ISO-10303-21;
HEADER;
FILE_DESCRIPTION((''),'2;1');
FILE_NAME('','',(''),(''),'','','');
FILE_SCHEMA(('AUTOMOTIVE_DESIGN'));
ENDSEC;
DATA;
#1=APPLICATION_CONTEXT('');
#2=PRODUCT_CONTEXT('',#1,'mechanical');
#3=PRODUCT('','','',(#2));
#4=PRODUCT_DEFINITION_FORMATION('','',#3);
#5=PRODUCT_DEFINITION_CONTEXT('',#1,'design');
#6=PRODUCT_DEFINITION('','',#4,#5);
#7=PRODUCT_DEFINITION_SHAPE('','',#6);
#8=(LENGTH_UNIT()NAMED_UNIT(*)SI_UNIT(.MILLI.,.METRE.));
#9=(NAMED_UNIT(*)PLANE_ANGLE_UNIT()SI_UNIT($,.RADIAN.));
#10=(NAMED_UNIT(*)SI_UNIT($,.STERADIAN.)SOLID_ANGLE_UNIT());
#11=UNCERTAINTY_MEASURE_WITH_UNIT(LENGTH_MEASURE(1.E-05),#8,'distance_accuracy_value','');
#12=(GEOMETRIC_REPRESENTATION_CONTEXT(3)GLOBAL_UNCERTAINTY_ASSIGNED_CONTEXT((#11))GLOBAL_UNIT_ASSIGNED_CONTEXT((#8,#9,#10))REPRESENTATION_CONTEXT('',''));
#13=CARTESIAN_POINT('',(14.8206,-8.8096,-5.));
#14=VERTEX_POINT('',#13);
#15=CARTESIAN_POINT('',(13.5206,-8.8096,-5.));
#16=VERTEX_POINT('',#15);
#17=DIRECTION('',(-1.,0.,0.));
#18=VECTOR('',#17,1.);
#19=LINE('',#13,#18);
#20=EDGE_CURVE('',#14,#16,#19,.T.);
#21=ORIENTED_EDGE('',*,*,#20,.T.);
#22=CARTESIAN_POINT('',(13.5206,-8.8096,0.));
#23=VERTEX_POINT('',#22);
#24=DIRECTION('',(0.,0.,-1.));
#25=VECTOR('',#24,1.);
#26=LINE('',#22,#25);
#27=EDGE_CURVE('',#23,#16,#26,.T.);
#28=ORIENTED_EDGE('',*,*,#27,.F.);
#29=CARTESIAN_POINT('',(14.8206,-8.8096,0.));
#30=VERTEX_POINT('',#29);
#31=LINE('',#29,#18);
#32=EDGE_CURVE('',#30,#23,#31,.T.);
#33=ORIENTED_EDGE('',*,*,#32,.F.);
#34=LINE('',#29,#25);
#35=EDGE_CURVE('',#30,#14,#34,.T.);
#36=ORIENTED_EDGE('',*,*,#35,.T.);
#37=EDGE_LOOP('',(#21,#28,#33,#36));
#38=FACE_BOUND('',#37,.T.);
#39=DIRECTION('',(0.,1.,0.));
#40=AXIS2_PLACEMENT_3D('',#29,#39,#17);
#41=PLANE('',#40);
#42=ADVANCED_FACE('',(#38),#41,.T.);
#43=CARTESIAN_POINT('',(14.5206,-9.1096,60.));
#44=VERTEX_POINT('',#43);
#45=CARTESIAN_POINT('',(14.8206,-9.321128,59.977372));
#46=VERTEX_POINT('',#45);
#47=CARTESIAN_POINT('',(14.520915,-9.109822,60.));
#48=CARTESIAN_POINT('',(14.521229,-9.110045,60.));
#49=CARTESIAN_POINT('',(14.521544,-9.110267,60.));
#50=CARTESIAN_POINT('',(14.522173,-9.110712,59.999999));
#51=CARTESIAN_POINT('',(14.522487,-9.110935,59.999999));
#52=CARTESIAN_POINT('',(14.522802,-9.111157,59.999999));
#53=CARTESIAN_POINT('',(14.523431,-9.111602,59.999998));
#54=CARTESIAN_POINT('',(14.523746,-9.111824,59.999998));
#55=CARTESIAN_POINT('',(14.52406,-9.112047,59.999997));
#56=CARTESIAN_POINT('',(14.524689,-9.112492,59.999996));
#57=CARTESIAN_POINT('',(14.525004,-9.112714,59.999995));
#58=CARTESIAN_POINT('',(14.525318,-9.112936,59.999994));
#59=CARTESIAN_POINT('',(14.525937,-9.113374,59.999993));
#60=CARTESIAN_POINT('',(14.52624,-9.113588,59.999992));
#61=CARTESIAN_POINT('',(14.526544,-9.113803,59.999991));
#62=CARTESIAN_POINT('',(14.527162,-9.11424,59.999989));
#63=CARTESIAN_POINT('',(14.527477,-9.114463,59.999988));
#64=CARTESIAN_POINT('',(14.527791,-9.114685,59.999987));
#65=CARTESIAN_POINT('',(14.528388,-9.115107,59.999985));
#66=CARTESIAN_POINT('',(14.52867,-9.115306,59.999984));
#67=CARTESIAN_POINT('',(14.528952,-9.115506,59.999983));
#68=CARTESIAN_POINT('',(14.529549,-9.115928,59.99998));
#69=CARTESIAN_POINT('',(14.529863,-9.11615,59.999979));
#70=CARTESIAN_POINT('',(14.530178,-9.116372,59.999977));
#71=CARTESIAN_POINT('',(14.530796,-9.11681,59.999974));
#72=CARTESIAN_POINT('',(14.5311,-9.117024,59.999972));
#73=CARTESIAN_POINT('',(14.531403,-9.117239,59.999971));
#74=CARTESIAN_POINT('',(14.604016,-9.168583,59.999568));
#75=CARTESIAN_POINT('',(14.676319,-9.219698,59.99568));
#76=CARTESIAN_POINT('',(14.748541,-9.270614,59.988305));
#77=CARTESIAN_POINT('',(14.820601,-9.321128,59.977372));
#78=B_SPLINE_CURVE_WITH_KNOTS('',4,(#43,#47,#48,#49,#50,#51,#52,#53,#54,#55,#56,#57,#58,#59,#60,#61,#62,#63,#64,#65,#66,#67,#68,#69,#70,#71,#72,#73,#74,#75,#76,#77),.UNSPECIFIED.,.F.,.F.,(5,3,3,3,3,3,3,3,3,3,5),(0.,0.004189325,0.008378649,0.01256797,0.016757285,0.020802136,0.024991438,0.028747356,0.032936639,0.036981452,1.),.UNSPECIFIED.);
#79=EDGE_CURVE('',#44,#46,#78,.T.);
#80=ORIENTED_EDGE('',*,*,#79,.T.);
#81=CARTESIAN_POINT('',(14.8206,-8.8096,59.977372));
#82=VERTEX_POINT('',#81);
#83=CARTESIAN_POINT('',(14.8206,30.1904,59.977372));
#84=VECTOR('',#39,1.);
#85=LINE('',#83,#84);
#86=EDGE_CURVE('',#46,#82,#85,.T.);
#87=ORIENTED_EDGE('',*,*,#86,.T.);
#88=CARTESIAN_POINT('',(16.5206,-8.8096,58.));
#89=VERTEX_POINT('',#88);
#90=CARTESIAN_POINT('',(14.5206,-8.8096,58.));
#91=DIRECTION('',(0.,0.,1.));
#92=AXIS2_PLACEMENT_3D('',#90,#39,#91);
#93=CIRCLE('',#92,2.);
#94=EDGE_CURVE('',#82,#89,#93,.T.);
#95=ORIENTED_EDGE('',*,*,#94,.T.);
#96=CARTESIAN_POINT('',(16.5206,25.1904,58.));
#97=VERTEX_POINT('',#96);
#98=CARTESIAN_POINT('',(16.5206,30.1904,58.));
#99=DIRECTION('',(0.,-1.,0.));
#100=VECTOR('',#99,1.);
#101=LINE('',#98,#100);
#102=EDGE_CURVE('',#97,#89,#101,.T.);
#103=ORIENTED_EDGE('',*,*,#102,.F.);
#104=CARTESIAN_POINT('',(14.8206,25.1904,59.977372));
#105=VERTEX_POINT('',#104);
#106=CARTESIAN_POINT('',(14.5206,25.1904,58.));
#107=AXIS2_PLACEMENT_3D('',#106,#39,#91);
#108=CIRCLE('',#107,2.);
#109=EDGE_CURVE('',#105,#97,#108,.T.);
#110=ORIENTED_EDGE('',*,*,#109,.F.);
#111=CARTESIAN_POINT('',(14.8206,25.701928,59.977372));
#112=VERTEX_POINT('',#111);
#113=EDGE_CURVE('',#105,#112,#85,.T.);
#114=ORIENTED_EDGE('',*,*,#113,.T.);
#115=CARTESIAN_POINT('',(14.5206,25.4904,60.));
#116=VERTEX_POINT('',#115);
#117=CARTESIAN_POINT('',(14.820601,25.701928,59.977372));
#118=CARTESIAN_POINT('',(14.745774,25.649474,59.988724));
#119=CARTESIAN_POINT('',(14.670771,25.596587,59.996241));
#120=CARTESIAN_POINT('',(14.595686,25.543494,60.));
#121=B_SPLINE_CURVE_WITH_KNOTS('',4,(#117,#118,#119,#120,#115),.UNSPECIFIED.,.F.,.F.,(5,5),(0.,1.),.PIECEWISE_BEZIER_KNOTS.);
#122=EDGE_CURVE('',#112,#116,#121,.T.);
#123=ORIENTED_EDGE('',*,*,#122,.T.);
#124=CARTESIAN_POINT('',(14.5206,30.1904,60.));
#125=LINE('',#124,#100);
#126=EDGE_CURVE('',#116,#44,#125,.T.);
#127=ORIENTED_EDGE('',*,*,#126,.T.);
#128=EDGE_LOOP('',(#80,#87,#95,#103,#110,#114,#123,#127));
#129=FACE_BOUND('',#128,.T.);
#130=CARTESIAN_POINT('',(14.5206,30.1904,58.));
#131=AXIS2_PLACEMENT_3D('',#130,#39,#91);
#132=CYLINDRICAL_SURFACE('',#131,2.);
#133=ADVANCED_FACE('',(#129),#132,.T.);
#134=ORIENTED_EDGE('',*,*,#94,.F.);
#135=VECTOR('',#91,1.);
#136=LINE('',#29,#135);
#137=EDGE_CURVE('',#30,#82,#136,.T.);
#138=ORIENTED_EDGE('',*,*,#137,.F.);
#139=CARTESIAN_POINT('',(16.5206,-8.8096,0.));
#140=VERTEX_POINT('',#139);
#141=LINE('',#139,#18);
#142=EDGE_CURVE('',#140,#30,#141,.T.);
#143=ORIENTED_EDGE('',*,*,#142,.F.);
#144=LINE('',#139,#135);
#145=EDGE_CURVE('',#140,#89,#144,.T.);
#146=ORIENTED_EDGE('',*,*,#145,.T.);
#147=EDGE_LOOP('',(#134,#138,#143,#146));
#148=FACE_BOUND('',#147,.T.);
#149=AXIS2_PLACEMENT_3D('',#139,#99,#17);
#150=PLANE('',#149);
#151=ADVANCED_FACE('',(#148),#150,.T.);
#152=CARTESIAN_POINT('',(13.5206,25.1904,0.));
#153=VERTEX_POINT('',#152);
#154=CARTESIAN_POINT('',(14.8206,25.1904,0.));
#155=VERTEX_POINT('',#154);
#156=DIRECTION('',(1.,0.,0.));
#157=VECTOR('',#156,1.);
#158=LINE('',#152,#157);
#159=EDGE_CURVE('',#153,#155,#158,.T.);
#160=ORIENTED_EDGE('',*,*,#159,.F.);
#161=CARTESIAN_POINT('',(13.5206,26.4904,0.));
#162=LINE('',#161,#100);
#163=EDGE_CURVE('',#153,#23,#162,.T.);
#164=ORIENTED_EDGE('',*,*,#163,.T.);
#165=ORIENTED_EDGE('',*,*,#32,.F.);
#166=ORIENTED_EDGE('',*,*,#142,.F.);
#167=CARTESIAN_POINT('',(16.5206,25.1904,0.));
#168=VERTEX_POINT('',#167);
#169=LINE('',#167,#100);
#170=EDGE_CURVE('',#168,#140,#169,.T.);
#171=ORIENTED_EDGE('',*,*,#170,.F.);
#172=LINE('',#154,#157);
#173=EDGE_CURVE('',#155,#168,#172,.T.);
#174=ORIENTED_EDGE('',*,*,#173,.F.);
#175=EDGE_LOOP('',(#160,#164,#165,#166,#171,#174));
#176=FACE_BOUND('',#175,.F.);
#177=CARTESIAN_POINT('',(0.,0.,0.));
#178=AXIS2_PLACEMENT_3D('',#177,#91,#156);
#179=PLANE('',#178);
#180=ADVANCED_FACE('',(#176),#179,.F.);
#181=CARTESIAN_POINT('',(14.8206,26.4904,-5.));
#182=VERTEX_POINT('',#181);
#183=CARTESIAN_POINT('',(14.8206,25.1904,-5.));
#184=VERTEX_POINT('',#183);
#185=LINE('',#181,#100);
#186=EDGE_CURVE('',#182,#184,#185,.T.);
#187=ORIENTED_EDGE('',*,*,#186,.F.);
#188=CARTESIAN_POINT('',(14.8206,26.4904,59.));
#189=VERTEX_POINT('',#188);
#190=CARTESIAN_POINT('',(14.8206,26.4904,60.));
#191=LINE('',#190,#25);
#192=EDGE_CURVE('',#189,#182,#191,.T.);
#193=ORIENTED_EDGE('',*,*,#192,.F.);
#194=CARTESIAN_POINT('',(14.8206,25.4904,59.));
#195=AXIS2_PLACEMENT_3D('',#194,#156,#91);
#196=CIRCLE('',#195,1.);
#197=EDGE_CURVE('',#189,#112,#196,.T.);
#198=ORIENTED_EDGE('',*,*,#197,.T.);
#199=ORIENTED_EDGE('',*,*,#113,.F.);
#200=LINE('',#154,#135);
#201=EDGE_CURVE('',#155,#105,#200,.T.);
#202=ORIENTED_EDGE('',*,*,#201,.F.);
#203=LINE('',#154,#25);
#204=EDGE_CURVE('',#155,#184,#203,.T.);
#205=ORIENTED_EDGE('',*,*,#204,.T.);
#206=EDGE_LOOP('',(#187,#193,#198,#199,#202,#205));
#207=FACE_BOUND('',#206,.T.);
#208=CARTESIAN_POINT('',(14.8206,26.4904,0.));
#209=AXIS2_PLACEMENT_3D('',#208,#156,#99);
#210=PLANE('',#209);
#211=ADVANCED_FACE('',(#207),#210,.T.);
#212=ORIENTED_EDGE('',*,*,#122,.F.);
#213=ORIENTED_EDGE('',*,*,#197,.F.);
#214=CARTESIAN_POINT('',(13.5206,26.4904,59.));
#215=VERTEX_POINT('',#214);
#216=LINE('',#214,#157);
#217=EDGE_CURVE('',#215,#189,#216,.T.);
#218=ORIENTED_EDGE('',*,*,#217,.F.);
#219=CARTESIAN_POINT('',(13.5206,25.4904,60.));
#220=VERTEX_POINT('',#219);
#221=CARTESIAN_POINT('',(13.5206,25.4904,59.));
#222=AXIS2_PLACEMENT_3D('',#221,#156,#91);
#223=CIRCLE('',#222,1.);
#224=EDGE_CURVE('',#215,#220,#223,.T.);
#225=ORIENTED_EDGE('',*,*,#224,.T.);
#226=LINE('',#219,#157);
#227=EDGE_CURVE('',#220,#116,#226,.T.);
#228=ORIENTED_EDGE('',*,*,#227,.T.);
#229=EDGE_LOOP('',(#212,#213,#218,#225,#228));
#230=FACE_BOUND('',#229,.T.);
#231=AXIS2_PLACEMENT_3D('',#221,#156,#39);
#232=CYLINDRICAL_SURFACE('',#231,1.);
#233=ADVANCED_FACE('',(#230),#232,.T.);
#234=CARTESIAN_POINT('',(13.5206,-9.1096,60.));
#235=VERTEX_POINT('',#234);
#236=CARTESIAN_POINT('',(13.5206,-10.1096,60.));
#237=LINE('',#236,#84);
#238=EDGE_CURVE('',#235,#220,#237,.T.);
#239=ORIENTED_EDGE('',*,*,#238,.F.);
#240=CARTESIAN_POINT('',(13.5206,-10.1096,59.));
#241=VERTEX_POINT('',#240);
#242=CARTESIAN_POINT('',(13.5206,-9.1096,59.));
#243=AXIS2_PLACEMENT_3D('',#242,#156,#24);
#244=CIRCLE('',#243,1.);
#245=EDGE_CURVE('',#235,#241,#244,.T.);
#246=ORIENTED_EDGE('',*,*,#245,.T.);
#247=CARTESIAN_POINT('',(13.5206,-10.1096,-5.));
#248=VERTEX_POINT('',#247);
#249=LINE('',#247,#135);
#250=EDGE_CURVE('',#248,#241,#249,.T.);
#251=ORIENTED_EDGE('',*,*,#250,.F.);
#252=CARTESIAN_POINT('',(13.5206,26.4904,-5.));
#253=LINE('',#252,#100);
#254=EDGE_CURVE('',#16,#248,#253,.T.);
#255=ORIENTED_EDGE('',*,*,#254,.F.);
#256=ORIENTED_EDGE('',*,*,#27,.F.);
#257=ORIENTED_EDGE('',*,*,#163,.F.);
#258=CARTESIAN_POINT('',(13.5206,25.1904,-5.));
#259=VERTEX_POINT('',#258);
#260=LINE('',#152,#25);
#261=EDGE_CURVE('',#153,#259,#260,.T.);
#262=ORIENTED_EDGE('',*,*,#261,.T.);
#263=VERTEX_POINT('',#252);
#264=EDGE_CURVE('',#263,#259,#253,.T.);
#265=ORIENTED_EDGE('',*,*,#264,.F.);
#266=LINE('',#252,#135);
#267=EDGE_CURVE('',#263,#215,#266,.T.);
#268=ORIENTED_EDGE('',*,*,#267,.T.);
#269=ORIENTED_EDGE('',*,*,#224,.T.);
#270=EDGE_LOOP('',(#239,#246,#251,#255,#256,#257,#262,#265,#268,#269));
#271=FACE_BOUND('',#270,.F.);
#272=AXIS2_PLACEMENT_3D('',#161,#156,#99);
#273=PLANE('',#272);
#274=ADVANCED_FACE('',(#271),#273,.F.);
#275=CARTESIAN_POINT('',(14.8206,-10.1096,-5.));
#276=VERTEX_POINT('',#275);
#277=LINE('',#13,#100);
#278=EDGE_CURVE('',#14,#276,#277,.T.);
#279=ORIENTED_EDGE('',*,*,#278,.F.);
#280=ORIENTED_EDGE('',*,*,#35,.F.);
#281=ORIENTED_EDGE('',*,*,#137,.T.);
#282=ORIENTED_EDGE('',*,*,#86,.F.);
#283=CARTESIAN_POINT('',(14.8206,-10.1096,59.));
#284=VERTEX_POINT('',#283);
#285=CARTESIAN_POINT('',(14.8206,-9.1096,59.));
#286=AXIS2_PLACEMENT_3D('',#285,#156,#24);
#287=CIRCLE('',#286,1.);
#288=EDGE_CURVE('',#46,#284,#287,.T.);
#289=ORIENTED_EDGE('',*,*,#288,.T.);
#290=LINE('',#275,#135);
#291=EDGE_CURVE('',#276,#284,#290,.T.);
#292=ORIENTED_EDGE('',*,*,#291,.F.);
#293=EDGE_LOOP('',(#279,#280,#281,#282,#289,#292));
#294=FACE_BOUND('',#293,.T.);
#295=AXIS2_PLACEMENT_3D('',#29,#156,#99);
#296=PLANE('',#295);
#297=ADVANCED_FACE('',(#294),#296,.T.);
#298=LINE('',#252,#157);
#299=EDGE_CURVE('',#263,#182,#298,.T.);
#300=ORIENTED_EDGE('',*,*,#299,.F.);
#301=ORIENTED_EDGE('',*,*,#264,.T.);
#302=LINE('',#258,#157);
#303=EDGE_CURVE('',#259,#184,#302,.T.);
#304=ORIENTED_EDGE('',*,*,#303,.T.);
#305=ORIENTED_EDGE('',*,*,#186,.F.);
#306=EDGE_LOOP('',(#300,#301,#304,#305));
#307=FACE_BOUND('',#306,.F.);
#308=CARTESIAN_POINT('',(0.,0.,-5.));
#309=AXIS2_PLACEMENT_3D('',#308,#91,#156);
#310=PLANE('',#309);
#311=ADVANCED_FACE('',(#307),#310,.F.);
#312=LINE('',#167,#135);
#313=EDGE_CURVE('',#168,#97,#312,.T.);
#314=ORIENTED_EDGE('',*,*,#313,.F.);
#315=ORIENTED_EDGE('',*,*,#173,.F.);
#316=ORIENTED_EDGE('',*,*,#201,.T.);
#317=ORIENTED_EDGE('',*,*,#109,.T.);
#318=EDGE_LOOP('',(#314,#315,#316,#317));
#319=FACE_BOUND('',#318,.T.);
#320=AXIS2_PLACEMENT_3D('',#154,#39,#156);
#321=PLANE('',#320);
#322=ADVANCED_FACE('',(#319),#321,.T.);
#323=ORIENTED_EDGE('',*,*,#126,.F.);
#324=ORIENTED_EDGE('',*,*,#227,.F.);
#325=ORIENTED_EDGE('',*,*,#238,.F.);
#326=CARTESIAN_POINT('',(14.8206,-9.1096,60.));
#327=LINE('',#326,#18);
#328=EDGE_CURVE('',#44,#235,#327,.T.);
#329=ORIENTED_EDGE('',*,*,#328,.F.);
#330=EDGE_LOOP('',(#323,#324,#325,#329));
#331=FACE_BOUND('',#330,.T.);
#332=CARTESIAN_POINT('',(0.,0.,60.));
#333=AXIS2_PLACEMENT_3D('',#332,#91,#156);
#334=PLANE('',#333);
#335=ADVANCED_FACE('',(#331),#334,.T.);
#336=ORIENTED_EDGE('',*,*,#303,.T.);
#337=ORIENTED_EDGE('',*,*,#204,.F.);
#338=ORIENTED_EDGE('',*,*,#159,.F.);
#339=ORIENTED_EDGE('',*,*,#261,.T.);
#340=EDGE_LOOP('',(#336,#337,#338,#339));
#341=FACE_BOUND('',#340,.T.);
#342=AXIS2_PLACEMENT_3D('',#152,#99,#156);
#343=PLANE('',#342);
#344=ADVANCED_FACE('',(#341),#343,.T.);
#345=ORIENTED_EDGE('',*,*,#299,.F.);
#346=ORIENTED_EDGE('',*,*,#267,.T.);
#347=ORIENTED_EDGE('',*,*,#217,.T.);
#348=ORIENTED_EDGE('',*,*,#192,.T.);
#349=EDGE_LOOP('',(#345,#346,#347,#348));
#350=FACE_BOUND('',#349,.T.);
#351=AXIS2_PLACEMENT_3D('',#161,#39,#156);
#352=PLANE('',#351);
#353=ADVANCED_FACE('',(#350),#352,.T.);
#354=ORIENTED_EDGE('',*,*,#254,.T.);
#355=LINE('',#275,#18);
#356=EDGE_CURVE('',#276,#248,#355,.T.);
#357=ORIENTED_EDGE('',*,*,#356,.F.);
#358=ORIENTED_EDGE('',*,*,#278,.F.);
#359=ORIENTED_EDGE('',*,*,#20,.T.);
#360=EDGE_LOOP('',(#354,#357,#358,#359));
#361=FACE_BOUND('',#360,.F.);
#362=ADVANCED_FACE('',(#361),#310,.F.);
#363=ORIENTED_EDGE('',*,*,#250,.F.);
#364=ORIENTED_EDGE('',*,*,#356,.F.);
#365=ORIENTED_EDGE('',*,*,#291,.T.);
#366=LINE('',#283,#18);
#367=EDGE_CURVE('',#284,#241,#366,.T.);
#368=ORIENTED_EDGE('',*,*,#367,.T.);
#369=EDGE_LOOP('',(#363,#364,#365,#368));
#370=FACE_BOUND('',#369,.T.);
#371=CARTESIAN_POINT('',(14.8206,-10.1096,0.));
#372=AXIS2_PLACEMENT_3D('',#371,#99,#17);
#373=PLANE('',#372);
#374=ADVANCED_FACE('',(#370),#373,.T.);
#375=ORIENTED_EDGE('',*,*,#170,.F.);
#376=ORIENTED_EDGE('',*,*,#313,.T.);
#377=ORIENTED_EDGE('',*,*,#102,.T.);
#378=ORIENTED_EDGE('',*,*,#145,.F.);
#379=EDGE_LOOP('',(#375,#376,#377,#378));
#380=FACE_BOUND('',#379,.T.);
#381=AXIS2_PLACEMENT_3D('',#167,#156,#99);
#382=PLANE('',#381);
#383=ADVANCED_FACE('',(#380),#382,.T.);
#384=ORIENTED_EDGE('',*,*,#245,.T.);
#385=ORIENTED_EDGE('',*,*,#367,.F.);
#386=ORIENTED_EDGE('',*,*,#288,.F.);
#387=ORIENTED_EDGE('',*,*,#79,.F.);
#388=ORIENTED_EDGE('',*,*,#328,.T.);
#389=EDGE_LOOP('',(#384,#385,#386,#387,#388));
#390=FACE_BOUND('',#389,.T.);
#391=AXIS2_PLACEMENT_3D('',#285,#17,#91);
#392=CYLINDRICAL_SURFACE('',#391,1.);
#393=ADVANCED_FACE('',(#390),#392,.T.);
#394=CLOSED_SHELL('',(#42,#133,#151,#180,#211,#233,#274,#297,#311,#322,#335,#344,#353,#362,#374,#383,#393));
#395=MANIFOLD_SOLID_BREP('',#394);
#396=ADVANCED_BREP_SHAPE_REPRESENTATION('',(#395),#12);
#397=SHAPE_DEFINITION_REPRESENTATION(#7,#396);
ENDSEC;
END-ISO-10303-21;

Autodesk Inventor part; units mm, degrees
ref_plane "YZ Plane" through (0, 0, 0) normal (1, 0, 0) x (0, 1, 0)
ref_plane "XZ Plane" through (0, 0, 0) normal (0, 1, 0) x (-1, 0, 0)
ref_plane "XY Plane" through (0, 0, 0) normal (0, 0, 1) x (1, 0, 0)
sketch "Sketch1" plane through (0, 0, 0) normal (0, 0, 1) x (1, 0, 0)
  line L0 (13.5206, 26.4904) -> (14.8206, 26.4904)
  line L1 (14.8206, 26.4904) -> (14.8206, 25.1904)
  line L2 (14.8206, 25.1904) -> (16.5206, 25.1904)
  line L3 (16.5206, -8.8096) -> (14.8206, -8.8096)
  line L4 (14.8206, -8.8096) -> (14.8206, -10.1096)
  line L5 (14.8206, -10.1096) -> (13.5206, -10.1096)
  line L6 (16.5206, 25.1904) -> (16.5206, -8.8096)
  line L7 (13.5206, 25.1904) -> (14.8206, 25.1904)
  line L8 (14.8206, -8.8096) -> (13.5206, -8.8096)
  line L9 (13.5206, 26.4904) -> (13.5206, -10.1096)
  dimension "d2" = 1.3
  dimension "d15" = 3
  dimension "d16" = 1.3
  dimension "d17" = 1.3
  dimension "d18" = 1.3
  dimension "d19" = 34
  dimension "d20" = 36.6
  dimension "d21" = 1.7
extrude "Extrusion1" add sketch "Sketch1" along normal blind 60
extrude "Extrusion2" add sketch "Sketch1" against normal blind 5 contours L0 L1 L7 L9 | L8 L4 L5 L9
fillet "Fillet2" radius 1 2 edges at (14.1706, 26.4904, 60) (14.1706, -10.1096, 60)
fillet "Fillet3" radius 2 1 edges at (16.5206, 8.1904, 60)
properties part number "upper cover_3DPrint"
